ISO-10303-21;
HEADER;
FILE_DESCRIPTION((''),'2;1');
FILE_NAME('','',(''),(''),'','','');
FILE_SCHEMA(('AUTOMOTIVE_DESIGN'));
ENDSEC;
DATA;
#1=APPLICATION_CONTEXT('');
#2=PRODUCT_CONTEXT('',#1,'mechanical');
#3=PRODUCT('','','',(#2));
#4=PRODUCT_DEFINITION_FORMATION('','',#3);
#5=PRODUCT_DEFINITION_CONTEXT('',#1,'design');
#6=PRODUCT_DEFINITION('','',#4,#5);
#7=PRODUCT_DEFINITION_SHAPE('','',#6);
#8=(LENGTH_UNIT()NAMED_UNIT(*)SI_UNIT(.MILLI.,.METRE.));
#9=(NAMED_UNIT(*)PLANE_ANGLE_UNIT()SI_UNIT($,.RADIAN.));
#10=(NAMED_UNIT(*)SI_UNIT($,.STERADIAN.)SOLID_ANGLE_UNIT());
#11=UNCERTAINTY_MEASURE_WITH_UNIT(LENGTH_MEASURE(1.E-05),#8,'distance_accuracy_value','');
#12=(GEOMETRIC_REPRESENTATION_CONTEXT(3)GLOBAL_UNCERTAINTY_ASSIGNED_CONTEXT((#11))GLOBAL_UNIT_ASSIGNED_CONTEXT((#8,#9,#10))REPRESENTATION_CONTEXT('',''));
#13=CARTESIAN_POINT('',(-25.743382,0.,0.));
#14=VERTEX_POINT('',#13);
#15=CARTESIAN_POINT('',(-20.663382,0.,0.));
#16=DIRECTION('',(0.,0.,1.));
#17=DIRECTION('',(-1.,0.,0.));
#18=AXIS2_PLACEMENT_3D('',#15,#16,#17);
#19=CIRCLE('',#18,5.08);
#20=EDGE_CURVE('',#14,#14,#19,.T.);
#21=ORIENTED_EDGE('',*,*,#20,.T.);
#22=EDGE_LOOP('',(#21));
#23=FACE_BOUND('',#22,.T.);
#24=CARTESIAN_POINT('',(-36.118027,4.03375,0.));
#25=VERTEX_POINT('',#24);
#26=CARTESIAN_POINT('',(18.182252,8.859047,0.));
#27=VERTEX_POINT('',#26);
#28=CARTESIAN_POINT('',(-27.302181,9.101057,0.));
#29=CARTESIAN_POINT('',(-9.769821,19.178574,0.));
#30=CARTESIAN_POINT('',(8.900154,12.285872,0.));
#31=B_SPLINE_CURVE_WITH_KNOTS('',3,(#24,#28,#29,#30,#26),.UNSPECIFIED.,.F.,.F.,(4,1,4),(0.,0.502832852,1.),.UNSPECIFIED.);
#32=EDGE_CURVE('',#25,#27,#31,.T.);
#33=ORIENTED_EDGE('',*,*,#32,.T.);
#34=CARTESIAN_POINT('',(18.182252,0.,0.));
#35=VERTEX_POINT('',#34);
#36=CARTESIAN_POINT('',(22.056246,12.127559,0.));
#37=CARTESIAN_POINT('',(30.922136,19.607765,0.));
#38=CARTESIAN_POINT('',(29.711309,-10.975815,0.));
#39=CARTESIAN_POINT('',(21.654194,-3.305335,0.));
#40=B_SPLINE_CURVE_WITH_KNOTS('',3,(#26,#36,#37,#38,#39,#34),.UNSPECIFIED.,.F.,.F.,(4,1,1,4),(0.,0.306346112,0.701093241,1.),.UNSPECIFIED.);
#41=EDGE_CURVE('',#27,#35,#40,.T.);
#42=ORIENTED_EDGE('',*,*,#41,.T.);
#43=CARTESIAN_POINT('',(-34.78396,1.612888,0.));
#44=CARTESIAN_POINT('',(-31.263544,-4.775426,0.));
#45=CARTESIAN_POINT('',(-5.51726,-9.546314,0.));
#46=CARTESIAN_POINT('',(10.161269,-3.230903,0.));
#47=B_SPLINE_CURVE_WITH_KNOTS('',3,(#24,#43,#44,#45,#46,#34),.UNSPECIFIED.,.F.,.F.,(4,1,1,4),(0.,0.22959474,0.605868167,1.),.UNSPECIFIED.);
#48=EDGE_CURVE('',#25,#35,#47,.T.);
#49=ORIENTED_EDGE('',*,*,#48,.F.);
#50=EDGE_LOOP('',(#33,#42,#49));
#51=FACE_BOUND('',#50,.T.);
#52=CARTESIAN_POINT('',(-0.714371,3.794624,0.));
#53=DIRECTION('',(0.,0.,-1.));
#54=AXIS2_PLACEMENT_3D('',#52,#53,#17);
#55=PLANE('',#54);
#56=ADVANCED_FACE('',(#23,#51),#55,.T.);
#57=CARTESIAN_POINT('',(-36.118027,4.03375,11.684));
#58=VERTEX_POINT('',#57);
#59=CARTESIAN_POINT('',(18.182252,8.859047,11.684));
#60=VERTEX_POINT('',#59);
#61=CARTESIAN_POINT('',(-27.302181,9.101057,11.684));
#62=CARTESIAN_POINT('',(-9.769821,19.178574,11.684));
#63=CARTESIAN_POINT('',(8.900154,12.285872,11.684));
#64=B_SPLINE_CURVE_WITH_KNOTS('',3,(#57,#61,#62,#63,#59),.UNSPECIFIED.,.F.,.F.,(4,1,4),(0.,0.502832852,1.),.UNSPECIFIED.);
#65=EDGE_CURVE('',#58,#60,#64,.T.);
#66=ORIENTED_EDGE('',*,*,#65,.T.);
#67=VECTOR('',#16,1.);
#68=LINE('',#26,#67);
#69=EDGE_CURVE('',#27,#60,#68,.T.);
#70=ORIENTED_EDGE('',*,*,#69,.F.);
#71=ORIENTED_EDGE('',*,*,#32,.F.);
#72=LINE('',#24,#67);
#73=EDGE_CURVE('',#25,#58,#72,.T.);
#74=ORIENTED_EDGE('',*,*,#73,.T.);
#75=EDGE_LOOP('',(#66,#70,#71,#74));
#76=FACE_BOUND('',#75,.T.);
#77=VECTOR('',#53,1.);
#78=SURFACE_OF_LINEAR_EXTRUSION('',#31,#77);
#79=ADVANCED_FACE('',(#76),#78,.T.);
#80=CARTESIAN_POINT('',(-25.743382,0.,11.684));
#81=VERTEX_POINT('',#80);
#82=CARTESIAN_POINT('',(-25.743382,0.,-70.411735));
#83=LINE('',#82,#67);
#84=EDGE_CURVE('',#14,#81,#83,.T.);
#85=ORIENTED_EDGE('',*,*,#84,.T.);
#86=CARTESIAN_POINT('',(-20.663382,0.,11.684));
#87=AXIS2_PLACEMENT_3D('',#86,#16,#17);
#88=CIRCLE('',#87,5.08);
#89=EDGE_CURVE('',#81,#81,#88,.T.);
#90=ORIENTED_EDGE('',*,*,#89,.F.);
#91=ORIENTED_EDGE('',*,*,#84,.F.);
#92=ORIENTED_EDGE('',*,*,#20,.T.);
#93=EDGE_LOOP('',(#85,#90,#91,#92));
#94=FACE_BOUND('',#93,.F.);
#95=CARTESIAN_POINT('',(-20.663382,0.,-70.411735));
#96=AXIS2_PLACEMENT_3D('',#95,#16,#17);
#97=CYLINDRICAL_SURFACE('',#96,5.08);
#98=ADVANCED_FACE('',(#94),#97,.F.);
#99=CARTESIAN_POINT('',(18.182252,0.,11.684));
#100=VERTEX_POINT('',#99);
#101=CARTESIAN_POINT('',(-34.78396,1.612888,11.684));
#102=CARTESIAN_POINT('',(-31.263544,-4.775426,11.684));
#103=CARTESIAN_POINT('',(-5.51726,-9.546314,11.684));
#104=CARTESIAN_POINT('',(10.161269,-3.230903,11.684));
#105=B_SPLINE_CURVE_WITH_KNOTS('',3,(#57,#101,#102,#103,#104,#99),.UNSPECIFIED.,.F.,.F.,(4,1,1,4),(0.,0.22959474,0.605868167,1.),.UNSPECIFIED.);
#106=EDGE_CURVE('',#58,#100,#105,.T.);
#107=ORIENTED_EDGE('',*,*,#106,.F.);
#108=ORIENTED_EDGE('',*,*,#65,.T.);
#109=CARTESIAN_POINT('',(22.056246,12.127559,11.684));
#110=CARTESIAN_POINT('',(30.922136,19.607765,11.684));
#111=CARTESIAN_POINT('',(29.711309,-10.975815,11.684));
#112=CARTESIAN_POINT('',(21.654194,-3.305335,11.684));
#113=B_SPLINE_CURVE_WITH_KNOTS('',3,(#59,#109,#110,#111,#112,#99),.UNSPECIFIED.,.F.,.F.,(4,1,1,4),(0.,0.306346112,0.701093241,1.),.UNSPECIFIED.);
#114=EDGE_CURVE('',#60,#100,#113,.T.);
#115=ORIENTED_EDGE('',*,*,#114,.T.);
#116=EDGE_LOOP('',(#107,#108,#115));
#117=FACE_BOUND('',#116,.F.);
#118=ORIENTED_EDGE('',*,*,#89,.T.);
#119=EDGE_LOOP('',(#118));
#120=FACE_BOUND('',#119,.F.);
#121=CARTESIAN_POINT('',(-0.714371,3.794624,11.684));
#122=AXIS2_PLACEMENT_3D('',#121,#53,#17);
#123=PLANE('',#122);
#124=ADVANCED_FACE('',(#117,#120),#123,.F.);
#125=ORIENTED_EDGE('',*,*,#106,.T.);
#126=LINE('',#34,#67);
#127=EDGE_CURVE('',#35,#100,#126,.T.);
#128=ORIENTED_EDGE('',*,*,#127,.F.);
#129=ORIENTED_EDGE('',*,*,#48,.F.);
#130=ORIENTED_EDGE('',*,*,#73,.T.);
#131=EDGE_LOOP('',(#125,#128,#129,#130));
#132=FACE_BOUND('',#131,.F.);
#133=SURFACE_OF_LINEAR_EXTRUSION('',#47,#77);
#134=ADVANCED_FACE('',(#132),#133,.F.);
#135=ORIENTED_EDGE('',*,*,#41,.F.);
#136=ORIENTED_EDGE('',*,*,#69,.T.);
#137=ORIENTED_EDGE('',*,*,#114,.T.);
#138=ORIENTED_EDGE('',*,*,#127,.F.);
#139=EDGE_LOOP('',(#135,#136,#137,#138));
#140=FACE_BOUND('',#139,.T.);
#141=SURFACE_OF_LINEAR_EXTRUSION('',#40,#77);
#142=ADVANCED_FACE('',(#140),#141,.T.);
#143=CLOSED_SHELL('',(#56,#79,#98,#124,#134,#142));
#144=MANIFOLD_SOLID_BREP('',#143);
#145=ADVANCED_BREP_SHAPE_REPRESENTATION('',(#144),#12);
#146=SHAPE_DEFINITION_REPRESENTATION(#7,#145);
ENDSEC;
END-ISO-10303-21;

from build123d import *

# Parameters (mm, degrees)
F1_DEPTH = 11.684
F3_D     = 10.16


with BuildPart() as f1:
    # F0 (on Top) → F1 (new body)
    with BuildSketch(Plane.XY):
        with BuildLine():
            add(Edge.make_bspline(
                [(-36.1180268228, 4.0337503888), (-27.3021805537, 9.101057148), (-9.7698211862, 19.1785744295), (8.9001535273, 12.2858719608), (18.1822516024, 8.8590467349)],
                knots=[0, 0, 0, 0, 0.5028328523, 1, 1, 1, 1], degree=3))
            add(Edge.make_bspline(
                [(-36.1180268228, 4.0337503888), (-34.7839596362, 1.6128883032), (-31.2635443087, -4.7754256271), (-5.5172595701, -9.5463141676), (10.1612689912, -3.2309029238), (18.1822516024, 0)],
                knots=[0, 0, 0, 0, 0.2295947399, 0.6058681674, 1, 1, 1, 1], degree=3))
            add(Edge.make_bspline(
                [(18.1822516024, 8.8590467349), (22.0562457427, 12.1275590602), (30.9221363084, 19.6077646412), (29.7113094866, -10.9758153664), (21.6541939321, -3.3053349507), (18.1822516024, 0)],
                knots=[0, 0, 0, 0, 0.3063461125, 0.7010932414, 1, 1, 1, 1], degree=3))
        make_face()
    extrude(amount=F1_DEPTH)

    # F3 (through all)
    with Locations(Plane(origin=(0, 0, 0), x_dir=(1, 0, 0), z_dir=(0, 0, -1))):
        with Locations((-20.6633824855, 0)):
            Hole(F3_D / 2)


solid = f1.part
